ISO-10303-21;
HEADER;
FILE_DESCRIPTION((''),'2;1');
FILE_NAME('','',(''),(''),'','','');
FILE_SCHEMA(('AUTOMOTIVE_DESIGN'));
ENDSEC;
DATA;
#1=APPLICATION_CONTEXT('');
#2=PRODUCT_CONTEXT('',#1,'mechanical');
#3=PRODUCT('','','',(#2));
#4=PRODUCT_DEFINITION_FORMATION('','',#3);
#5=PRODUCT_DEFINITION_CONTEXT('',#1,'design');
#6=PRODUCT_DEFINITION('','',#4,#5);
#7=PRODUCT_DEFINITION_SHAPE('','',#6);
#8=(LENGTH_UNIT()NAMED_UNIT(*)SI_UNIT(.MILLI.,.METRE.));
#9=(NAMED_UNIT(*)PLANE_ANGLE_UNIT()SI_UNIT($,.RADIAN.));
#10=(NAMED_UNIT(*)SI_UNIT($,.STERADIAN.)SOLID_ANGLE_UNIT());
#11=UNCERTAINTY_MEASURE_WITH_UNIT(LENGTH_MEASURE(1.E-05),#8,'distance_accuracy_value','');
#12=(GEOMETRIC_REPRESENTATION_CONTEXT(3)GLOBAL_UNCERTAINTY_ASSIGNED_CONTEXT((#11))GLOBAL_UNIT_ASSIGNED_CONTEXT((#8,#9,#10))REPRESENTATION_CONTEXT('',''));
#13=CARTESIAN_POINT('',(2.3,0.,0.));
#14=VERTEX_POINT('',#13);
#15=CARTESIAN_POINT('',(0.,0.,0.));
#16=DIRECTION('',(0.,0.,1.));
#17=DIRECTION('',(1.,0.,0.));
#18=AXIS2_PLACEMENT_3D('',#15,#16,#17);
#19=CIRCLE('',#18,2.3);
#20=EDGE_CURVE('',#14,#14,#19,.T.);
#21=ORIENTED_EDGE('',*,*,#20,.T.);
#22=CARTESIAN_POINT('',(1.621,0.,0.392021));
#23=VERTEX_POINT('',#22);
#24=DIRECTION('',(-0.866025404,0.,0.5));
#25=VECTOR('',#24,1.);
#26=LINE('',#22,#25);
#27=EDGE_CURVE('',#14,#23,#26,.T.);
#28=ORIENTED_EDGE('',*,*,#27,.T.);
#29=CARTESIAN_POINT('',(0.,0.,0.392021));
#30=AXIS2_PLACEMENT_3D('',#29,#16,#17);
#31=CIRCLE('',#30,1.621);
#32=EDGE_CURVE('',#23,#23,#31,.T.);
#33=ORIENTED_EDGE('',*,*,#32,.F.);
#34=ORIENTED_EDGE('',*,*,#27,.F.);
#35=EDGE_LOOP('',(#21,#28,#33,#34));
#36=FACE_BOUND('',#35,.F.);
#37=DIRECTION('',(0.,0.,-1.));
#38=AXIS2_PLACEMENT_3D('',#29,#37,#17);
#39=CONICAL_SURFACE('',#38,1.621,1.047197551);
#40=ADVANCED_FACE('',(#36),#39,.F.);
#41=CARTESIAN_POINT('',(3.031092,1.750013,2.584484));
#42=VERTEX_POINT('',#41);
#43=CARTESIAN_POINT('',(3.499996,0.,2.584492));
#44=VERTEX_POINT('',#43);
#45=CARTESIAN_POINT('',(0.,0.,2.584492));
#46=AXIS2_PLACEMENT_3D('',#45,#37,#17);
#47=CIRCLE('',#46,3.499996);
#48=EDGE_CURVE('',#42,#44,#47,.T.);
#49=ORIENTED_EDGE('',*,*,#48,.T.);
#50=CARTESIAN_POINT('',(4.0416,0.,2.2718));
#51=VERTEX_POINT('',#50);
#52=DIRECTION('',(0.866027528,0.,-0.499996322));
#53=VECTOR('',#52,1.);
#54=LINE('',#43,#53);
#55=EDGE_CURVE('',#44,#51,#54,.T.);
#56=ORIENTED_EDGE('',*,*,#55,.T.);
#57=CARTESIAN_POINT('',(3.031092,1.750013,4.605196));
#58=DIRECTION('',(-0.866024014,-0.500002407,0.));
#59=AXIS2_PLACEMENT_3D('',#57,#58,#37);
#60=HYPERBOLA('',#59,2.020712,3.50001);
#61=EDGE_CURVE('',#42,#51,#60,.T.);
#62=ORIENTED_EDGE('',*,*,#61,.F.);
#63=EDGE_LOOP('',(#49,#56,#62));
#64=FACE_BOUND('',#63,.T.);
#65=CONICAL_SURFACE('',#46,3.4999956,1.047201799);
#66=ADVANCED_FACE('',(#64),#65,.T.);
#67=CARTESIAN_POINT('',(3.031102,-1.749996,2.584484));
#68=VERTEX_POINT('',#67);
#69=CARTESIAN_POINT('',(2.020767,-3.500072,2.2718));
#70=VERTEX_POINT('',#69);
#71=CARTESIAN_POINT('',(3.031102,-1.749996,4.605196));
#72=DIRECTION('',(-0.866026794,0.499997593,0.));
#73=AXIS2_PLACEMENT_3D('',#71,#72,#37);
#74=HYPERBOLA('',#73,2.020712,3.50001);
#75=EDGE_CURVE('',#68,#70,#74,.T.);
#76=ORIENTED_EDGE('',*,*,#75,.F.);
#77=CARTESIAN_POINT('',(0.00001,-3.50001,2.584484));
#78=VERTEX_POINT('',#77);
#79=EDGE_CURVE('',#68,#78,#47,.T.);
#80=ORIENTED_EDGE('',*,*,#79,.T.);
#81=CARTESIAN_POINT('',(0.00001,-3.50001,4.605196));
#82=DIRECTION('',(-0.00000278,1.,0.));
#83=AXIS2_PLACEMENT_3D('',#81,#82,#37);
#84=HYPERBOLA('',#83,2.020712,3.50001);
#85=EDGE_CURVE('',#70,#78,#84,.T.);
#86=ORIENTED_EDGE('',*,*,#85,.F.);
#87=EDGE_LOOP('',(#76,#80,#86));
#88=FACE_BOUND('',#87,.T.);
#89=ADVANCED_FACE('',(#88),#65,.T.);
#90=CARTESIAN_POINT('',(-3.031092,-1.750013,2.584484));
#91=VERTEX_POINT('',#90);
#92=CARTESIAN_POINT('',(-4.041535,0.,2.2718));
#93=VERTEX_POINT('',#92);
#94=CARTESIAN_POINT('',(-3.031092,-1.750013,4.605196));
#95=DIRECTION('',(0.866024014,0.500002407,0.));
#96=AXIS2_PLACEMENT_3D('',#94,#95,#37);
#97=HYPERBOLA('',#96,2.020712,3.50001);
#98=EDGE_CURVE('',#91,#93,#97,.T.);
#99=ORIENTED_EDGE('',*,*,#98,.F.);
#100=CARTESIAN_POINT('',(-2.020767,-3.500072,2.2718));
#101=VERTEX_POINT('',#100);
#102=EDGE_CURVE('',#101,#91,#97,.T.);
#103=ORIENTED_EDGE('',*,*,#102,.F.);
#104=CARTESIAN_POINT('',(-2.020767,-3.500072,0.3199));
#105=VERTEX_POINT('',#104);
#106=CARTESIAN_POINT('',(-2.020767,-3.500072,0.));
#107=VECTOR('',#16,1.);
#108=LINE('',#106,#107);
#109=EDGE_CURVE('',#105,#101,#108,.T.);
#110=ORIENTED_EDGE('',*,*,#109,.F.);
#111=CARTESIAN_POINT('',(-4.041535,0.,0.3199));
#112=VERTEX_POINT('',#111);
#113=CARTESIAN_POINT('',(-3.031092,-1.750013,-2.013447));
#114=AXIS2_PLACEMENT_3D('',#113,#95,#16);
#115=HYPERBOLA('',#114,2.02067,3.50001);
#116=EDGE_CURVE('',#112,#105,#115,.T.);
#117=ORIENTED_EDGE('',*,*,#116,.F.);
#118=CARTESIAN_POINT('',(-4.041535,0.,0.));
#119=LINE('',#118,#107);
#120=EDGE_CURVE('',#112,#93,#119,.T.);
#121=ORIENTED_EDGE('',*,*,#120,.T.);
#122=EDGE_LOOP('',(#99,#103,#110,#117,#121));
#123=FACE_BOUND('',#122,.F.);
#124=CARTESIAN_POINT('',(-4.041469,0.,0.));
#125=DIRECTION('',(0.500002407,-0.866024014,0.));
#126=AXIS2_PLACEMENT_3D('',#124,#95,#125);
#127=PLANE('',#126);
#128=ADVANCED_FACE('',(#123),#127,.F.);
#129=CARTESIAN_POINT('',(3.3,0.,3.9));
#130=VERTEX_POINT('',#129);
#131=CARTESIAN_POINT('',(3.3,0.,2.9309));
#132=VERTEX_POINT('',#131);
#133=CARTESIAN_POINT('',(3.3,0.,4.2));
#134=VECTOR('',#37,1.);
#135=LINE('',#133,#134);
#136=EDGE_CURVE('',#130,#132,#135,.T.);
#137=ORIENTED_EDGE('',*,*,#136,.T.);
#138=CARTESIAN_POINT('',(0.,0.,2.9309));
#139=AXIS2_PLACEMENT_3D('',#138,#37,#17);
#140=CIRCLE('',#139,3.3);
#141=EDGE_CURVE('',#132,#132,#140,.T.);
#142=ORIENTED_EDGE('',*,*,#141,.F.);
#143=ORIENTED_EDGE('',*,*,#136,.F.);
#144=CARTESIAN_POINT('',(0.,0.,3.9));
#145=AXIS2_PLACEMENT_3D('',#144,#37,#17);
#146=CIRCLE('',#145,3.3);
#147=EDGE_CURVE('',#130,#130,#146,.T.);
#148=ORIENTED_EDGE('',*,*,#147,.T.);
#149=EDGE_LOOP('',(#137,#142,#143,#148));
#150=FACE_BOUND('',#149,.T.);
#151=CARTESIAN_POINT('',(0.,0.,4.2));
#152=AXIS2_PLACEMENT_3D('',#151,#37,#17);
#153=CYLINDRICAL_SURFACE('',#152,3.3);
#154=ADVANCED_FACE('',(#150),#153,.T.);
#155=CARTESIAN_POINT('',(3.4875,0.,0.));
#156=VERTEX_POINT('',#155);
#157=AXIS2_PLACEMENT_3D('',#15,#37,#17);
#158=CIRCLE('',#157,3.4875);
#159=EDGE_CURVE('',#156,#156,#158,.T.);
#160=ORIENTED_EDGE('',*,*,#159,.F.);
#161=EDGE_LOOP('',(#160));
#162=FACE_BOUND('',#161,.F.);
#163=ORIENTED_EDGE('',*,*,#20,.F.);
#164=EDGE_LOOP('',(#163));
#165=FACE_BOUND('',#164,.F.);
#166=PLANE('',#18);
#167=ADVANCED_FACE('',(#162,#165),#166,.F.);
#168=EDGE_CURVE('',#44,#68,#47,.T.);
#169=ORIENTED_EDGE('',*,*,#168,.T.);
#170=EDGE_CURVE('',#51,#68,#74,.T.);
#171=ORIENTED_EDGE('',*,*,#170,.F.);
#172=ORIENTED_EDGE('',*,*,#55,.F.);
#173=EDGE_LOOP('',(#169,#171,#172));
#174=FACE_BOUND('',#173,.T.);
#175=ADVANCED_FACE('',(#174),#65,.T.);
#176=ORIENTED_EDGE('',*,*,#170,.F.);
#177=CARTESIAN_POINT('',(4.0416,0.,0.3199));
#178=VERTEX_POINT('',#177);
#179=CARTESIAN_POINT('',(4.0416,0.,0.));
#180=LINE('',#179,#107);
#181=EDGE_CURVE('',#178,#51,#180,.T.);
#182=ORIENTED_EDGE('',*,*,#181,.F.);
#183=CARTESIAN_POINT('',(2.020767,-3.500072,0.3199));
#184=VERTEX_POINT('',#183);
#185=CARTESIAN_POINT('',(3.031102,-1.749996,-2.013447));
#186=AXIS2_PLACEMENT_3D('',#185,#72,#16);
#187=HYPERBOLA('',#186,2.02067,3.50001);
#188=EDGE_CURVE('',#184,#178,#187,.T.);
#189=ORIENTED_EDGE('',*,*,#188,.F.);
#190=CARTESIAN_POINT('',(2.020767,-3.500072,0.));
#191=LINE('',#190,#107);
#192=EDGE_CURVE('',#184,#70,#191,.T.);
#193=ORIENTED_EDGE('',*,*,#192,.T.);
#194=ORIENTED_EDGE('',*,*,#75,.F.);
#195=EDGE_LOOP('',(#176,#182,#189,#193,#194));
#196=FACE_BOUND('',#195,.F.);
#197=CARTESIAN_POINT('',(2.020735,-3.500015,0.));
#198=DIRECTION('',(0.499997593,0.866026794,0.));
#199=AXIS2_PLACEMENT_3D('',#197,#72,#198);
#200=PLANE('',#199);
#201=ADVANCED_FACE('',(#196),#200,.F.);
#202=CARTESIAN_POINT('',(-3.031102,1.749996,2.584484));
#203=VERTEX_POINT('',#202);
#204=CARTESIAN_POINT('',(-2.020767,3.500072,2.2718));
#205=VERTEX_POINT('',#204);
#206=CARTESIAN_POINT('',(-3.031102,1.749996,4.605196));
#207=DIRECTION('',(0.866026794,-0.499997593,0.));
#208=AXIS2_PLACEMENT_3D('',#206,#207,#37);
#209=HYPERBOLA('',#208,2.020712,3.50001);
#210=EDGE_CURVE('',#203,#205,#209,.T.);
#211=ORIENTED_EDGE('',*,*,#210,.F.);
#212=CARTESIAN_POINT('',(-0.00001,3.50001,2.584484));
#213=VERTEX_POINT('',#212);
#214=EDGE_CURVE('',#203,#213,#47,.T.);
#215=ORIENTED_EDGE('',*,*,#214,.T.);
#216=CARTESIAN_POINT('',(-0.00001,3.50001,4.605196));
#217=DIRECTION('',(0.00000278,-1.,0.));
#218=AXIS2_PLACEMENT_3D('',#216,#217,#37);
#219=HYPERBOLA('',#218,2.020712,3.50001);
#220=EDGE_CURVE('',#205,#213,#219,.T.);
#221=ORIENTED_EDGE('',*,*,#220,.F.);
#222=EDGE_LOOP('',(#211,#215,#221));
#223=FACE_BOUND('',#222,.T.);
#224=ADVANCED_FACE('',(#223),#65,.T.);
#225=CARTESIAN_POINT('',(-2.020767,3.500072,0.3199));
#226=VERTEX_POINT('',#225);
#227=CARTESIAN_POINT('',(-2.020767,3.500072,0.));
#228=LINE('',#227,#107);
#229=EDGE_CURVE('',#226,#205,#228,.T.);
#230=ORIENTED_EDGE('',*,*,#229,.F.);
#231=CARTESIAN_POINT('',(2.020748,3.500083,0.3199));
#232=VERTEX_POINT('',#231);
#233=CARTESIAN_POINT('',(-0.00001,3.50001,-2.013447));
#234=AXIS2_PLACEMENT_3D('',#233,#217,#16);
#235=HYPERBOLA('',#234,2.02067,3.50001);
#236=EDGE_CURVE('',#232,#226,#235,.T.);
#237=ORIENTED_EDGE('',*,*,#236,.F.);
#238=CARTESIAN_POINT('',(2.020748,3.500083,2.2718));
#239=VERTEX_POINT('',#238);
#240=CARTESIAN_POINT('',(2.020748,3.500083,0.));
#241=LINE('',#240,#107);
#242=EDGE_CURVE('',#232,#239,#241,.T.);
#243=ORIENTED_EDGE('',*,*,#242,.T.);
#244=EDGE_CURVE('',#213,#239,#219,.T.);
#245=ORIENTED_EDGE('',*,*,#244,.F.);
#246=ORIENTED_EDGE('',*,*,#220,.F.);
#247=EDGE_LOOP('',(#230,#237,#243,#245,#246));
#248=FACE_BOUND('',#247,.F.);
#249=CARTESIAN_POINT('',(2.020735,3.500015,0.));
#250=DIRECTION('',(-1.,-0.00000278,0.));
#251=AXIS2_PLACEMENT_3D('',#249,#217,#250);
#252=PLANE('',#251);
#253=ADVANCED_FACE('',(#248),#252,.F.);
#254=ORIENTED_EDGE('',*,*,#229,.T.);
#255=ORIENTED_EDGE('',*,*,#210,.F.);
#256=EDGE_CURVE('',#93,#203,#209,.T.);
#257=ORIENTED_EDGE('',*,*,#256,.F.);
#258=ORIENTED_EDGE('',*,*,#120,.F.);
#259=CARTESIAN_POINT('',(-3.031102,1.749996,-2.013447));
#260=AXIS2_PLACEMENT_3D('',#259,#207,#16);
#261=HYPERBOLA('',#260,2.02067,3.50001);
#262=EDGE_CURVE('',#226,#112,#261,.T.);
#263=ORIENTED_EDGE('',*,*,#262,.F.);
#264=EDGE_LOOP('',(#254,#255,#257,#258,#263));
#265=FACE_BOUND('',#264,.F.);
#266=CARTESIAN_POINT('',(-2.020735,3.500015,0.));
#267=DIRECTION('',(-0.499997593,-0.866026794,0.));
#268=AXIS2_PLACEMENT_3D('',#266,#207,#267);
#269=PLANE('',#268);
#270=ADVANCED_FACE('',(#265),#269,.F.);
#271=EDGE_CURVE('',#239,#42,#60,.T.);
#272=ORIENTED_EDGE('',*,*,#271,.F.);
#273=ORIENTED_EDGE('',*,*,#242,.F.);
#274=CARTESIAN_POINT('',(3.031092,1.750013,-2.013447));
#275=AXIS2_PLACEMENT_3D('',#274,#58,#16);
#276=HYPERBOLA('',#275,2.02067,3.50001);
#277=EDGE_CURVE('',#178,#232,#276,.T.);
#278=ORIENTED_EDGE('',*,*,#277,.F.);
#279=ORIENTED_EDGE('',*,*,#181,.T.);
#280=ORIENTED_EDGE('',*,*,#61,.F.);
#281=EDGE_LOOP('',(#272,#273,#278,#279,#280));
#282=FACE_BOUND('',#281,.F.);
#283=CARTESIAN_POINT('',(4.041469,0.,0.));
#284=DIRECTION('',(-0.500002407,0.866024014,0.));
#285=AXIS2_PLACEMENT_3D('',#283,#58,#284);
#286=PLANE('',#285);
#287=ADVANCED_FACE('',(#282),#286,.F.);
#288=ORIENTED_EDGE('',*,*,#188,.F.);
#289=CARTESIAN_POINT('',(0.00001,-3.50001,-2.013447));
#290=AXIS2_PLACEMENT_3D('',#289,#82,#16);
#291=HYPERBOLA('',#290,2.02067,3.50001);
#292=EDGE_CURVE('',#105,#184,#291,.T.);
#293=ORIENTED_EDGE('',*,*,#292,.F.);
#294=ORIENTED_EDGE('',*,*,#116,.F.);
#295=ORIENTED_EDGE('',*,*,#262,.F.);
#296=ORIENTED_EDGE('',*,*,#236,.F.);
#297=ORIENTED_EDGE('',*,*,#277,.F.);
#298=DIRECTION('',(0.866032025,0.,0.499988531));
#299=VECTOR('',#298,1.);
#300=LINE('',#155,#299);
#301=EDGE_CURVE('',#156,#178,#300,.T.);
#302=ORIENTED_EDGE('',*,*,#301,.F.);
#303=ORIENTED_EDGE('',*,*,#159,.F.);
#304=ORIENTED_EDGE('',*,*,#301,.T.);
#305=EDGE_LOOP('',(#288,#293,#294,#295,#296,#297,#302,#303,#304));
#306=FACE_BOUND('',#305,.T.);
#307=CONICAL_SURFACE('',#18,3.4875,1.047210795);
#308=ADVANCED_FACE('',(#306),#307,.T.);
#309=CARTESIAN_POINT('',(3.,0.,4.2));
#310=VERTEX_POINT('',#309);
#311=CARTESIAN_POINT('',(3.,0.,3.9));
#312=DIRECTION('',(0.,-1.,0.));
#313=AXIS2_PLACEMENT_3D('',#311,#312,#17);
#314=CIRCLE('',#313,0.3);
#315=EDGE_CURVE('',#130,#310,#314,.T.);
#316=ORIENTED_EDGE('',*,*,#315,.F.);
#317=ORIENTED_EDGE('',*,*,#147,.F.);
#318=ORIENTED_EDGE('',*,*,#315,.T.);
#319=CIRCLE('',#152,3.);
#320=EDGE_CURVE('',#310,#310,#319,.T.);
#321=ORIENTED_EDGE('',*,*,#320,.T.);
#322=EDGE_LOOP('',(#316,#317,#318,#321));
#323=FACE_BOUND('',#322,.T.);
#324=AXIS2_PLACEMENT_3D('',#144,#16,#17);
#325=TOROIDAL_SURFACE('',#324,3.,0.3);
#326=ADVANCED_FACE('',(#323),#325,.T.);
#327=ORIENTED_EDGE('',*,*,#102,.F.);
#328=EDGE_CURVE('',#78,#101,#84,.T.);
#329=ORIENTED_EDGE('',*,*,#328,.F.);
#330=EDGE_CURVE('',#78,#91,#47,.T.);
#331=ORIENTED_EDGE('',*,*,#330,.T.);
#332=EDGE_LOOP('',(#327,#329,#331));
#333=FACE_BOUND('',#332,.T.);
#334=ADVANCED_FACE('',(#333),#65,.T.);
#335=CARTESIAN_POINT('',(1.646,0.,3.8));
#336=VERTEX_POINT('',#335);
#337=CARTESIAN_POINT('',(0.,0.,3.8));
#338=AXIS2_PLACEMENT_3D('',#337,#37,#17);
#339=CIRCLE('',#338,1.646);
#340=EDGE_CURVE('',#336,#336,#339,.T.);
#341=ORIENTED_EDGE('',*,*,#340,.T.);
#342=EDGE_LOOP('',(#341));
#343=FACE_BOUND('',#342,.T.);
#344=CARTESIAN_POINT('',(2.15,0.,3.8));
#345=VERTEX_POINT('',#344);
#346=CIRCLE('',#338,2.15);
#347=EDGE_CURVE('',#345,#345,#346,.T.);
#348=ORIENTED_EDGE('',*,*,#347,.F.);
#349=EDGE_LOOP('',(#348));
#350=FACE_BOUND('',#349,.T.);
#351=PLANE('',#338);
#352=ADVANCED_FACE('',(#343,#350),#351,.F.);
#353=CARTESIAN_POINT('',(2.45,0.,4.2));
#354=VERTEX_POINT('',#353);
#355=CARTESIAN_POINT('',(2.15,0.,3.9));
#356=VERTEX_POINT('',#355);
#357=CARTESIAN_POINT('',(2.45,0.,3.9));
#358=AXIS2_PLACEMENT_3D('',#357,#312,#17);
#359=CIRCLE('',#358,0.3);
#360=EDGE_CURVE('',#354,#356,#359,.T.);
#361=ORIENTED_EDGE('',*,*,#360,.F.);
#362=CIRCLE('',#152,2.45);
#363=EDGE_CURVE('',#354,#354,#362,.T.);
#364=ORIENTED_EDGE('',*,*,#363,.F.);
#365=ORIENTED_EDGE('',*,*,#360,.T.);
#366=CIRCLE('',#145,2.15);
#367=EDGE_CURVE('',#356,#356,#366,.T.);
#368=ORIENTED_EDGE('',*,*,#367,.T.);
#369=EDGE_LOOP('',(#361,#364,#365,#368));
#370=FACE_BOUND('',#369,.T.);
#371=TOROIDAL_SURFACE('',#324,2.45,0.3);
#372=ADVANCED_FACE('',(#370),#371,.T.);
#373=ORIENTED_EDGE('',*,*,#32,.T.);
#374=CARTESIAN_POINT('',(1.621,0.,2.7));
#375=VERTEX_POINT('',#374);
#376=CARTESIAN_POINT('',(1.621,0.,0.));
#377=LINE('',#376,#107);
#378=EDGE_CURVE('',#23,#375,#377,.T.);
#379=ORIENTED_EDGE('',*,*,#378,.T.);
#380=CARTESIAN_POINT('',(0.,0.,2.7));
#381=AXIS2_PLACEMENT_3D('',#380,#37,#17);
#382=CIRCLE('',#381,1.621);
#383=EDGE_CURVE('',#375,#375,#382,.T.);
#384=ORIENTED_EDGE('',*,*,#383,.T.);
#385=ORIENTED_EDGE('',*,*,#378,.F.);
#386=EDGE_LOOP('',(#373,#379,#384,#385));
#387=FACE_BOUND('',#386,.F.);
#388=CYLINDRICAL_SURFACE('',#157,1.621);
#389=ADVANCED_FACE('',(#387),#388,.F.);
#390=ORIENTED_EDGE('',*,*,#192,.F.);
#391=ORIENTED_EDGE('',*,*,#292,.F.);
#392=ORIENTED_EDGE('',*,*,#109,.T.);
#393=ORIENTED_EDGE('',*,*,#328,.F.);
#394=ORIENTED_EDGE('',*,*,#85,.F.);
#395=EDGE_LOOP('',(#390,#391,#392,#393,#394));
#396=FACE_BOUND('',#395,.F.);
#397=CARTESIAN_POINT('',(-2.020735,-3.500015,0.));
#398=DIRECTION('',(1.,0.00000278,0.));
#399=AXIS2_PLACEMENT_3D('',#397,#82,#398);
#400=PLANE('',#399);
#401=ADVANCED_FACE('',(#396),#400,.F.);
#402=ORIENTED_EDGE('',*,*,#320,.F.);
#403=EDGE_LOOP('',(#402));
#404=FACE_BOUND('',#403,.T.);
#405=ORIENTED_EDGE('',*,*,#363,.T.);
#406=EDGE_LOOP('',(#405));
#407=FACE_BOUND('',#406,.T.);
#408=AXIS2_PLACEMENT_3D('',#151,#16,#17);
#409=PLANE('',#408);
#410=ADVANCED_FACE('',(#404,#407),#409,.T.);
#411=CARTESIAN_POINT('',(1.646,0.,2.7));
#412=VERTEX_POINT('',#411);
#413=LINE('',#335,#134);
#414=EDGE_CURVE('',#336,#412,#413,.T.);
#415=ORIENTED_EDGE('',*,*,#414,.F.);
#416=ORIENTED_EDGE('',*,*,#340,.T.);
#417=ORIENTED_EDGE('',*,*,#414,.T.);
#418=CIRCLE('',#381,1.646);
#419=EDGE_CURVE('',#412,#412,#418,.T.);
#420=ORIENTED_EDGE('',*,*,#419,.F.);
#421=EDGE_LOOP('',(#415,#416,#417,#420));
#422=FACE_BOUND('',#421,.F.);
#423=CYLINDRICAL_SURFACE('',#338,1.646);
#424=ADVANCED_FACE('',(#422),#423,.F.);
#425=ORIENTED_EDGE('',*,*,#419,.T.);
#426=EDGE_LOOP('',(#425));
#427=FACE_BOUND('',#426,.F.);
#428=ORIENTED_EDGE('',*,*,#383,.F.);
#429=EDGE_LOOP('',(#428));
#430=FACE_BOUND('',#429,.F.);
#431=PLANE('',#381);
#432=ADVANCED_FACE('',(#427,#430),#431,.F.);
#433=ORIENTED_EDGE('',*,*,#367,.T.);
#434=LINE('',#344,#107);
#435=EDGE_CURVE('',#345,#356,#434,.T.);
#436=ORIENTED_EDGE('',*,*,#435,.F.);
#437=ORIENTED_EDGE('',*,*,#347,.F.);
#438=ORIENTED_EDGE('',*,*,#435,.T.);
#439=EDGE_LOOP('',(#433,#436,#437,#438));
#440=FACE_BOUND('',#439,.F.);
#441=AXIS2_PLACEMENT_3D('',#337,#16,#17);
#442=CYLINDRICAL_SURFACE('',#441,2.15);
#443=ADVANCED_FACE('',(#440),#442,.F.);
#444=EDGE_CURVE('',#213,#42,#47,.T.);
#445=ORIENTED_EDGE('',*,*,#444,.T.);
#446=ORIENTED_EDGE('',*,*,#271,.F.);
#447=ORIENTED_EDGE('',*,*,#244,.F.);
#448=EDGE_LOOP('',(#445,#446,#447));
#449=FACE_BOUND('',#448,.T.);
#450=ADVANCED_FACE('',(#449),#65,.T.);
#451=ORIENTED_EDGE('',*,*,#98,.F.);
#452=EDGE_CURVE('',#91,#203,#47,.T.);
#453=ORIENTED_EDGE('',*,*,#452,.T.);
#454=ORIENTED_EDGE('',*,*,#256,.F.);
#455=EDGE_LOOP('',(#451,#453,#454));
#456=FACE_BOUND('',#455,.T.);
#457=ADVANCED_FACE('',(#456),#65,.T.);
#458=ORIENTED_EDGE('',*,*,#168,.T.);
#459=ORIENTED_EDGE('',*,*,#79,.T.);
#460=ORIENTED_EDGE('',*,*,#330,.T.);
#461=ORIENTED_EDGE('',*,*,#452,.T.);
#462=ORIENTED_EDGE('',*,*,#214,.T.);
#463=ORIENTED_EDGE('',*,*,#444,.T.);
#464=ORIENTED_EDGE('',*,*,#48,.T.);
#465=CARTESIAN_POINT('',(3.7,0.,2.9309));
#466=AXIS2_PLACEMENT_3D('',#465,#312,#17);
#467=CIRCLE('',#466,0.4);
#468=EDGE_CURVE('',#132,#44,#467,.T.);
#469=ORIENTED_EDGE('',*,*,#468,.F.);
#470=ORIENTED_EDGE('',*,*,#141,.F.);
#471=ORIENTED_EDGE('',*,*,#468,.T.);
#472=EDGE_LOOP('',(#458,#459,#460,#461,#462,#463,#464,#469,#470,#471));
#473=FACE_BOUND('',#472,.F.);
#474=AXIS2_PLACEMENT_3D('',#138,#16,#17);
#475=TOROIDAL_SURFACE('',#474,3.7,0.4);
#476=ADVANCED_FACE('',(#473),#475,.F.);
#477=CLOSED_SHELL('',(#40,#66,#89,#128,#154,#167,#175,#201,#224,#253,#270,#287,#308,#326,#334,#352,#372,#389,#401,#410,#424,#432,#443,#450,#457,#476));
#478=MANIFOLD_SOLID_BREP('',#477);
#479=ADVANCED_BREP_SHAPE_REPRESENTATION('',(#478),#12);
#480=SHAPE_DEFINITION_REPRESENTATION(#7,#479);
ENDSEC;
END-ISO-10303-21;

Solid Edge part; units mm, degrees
sketch "Sketch1" plane through (0, 0, 0) normal (0, 0, 1) x (1, 0, 0)
  circle A0 centre (0, 0) radius 1.621
  circle A1 centre (0, 0) radius 4.0415
  dimension "D1" = 3.5
  dimension "D2" = 3.242
extrude "Protrusion1" add sketch "Sketch1" along normal blind 4.2
sketch "Sketch2" plane through (0, 0, 0) normal (0, 0, 1) x (1, 0, 0)
  line L0 (4.0415, 0) -> (2.0207, 3.5)
  arc A0 (2.0207, 3.5) -> (4.0415, 0) centre (0, 0) cw
  dimension "D1" = 3.5
extrude "ExtrudedCutout_1" cut sketch "Sketch2" along normal blind 4.2
pattern_circular "Pattern1" count 6 over 360 about axis through (0, 0, 0) along (0, 0, -1) of "ExtrudedCutout_1"
cosmetic_thread "Thread_1" size "M4" thread depth 2.7
sketch "Sketch3" plane through (0, 0, 0) normal (0, -1, 0) x (1, 0, 0)
  line L0 (4.0416, 0.3199) -> (4.0416, 0)
  line L1 (4.0416, 0) -> (3.4875, 0)
  line L2 (3.4875, 0) -> (4.0416, 0.3199)
  line L3 (3.3, 4.2) -> (3.3, 2.9309)
  arc A0 (3.3, 2.9309) -> (3.5, 2.5845) centre (3.7, 2.9309) ccw
  line L4 (3.5, 2.5845) -> (4.0416, 2.2718)
  line L5 (4.0416, 2.2718) -> (4.0416, 4.2)
  line L6 (4.0416, 4.2) -> (3.3, 4.2)
  dimension "D1" = 4.2
  dimension "D2" = 3.4875
  dimension "D3" = 4.0416
  dimension "D4" = 3.3
  dimension "D5" = 4.0416
  dimension "D6" = 2.7
  dimension "D7" = 0.4
revolve "RevolvedCutout_1" cut sketch "Sketch3" angle 360 about axis through (0, 0, 11.9) along (0, 0, -1)
sketch "Sketch4" plane through (0, 0, 0) normal (0, -1, 0) x (1, 0, 0)
  line L0 (1.621, 4.2) -> (1.621, 2.7)
  line L1 (2.15, 4.2) -> (1.621, 4.2)
  line L2 (2.15, 3.8) -> (2.15, 4.2)
  line L3 (1.646, 3.8) -> (2.15, 3.8)
  line L4 (1.646, 3.8) -> (1.646, 2.7)
  line L5 (1.646, 2.7) -> (1.621, 2.7)
  dimension "D1" = 2.7
  dimension "D2" = 4.2
  dimension "D3" = 0.4
  dimension "D4" = 1.621
  dimension "D5" = 0.025
  dimension "D6" = 2.15
revolve "RevolvedCutout_2" cut sketch "Sketch4" angle 360 about axis through (0, 0, 8.4) along (0, 0, -1)
fillet "Round_1" radius 0.3 2 edges at (-3.3, 0, 4.2) (-2.15, 0, 4.2)
chamfer "Chamfer_1" distance 0.679 angle 30 1 edges at (-1.621, 0, 0) measured on face at (-2.3947, -2.2552, 0)
properties material "Stahl"
